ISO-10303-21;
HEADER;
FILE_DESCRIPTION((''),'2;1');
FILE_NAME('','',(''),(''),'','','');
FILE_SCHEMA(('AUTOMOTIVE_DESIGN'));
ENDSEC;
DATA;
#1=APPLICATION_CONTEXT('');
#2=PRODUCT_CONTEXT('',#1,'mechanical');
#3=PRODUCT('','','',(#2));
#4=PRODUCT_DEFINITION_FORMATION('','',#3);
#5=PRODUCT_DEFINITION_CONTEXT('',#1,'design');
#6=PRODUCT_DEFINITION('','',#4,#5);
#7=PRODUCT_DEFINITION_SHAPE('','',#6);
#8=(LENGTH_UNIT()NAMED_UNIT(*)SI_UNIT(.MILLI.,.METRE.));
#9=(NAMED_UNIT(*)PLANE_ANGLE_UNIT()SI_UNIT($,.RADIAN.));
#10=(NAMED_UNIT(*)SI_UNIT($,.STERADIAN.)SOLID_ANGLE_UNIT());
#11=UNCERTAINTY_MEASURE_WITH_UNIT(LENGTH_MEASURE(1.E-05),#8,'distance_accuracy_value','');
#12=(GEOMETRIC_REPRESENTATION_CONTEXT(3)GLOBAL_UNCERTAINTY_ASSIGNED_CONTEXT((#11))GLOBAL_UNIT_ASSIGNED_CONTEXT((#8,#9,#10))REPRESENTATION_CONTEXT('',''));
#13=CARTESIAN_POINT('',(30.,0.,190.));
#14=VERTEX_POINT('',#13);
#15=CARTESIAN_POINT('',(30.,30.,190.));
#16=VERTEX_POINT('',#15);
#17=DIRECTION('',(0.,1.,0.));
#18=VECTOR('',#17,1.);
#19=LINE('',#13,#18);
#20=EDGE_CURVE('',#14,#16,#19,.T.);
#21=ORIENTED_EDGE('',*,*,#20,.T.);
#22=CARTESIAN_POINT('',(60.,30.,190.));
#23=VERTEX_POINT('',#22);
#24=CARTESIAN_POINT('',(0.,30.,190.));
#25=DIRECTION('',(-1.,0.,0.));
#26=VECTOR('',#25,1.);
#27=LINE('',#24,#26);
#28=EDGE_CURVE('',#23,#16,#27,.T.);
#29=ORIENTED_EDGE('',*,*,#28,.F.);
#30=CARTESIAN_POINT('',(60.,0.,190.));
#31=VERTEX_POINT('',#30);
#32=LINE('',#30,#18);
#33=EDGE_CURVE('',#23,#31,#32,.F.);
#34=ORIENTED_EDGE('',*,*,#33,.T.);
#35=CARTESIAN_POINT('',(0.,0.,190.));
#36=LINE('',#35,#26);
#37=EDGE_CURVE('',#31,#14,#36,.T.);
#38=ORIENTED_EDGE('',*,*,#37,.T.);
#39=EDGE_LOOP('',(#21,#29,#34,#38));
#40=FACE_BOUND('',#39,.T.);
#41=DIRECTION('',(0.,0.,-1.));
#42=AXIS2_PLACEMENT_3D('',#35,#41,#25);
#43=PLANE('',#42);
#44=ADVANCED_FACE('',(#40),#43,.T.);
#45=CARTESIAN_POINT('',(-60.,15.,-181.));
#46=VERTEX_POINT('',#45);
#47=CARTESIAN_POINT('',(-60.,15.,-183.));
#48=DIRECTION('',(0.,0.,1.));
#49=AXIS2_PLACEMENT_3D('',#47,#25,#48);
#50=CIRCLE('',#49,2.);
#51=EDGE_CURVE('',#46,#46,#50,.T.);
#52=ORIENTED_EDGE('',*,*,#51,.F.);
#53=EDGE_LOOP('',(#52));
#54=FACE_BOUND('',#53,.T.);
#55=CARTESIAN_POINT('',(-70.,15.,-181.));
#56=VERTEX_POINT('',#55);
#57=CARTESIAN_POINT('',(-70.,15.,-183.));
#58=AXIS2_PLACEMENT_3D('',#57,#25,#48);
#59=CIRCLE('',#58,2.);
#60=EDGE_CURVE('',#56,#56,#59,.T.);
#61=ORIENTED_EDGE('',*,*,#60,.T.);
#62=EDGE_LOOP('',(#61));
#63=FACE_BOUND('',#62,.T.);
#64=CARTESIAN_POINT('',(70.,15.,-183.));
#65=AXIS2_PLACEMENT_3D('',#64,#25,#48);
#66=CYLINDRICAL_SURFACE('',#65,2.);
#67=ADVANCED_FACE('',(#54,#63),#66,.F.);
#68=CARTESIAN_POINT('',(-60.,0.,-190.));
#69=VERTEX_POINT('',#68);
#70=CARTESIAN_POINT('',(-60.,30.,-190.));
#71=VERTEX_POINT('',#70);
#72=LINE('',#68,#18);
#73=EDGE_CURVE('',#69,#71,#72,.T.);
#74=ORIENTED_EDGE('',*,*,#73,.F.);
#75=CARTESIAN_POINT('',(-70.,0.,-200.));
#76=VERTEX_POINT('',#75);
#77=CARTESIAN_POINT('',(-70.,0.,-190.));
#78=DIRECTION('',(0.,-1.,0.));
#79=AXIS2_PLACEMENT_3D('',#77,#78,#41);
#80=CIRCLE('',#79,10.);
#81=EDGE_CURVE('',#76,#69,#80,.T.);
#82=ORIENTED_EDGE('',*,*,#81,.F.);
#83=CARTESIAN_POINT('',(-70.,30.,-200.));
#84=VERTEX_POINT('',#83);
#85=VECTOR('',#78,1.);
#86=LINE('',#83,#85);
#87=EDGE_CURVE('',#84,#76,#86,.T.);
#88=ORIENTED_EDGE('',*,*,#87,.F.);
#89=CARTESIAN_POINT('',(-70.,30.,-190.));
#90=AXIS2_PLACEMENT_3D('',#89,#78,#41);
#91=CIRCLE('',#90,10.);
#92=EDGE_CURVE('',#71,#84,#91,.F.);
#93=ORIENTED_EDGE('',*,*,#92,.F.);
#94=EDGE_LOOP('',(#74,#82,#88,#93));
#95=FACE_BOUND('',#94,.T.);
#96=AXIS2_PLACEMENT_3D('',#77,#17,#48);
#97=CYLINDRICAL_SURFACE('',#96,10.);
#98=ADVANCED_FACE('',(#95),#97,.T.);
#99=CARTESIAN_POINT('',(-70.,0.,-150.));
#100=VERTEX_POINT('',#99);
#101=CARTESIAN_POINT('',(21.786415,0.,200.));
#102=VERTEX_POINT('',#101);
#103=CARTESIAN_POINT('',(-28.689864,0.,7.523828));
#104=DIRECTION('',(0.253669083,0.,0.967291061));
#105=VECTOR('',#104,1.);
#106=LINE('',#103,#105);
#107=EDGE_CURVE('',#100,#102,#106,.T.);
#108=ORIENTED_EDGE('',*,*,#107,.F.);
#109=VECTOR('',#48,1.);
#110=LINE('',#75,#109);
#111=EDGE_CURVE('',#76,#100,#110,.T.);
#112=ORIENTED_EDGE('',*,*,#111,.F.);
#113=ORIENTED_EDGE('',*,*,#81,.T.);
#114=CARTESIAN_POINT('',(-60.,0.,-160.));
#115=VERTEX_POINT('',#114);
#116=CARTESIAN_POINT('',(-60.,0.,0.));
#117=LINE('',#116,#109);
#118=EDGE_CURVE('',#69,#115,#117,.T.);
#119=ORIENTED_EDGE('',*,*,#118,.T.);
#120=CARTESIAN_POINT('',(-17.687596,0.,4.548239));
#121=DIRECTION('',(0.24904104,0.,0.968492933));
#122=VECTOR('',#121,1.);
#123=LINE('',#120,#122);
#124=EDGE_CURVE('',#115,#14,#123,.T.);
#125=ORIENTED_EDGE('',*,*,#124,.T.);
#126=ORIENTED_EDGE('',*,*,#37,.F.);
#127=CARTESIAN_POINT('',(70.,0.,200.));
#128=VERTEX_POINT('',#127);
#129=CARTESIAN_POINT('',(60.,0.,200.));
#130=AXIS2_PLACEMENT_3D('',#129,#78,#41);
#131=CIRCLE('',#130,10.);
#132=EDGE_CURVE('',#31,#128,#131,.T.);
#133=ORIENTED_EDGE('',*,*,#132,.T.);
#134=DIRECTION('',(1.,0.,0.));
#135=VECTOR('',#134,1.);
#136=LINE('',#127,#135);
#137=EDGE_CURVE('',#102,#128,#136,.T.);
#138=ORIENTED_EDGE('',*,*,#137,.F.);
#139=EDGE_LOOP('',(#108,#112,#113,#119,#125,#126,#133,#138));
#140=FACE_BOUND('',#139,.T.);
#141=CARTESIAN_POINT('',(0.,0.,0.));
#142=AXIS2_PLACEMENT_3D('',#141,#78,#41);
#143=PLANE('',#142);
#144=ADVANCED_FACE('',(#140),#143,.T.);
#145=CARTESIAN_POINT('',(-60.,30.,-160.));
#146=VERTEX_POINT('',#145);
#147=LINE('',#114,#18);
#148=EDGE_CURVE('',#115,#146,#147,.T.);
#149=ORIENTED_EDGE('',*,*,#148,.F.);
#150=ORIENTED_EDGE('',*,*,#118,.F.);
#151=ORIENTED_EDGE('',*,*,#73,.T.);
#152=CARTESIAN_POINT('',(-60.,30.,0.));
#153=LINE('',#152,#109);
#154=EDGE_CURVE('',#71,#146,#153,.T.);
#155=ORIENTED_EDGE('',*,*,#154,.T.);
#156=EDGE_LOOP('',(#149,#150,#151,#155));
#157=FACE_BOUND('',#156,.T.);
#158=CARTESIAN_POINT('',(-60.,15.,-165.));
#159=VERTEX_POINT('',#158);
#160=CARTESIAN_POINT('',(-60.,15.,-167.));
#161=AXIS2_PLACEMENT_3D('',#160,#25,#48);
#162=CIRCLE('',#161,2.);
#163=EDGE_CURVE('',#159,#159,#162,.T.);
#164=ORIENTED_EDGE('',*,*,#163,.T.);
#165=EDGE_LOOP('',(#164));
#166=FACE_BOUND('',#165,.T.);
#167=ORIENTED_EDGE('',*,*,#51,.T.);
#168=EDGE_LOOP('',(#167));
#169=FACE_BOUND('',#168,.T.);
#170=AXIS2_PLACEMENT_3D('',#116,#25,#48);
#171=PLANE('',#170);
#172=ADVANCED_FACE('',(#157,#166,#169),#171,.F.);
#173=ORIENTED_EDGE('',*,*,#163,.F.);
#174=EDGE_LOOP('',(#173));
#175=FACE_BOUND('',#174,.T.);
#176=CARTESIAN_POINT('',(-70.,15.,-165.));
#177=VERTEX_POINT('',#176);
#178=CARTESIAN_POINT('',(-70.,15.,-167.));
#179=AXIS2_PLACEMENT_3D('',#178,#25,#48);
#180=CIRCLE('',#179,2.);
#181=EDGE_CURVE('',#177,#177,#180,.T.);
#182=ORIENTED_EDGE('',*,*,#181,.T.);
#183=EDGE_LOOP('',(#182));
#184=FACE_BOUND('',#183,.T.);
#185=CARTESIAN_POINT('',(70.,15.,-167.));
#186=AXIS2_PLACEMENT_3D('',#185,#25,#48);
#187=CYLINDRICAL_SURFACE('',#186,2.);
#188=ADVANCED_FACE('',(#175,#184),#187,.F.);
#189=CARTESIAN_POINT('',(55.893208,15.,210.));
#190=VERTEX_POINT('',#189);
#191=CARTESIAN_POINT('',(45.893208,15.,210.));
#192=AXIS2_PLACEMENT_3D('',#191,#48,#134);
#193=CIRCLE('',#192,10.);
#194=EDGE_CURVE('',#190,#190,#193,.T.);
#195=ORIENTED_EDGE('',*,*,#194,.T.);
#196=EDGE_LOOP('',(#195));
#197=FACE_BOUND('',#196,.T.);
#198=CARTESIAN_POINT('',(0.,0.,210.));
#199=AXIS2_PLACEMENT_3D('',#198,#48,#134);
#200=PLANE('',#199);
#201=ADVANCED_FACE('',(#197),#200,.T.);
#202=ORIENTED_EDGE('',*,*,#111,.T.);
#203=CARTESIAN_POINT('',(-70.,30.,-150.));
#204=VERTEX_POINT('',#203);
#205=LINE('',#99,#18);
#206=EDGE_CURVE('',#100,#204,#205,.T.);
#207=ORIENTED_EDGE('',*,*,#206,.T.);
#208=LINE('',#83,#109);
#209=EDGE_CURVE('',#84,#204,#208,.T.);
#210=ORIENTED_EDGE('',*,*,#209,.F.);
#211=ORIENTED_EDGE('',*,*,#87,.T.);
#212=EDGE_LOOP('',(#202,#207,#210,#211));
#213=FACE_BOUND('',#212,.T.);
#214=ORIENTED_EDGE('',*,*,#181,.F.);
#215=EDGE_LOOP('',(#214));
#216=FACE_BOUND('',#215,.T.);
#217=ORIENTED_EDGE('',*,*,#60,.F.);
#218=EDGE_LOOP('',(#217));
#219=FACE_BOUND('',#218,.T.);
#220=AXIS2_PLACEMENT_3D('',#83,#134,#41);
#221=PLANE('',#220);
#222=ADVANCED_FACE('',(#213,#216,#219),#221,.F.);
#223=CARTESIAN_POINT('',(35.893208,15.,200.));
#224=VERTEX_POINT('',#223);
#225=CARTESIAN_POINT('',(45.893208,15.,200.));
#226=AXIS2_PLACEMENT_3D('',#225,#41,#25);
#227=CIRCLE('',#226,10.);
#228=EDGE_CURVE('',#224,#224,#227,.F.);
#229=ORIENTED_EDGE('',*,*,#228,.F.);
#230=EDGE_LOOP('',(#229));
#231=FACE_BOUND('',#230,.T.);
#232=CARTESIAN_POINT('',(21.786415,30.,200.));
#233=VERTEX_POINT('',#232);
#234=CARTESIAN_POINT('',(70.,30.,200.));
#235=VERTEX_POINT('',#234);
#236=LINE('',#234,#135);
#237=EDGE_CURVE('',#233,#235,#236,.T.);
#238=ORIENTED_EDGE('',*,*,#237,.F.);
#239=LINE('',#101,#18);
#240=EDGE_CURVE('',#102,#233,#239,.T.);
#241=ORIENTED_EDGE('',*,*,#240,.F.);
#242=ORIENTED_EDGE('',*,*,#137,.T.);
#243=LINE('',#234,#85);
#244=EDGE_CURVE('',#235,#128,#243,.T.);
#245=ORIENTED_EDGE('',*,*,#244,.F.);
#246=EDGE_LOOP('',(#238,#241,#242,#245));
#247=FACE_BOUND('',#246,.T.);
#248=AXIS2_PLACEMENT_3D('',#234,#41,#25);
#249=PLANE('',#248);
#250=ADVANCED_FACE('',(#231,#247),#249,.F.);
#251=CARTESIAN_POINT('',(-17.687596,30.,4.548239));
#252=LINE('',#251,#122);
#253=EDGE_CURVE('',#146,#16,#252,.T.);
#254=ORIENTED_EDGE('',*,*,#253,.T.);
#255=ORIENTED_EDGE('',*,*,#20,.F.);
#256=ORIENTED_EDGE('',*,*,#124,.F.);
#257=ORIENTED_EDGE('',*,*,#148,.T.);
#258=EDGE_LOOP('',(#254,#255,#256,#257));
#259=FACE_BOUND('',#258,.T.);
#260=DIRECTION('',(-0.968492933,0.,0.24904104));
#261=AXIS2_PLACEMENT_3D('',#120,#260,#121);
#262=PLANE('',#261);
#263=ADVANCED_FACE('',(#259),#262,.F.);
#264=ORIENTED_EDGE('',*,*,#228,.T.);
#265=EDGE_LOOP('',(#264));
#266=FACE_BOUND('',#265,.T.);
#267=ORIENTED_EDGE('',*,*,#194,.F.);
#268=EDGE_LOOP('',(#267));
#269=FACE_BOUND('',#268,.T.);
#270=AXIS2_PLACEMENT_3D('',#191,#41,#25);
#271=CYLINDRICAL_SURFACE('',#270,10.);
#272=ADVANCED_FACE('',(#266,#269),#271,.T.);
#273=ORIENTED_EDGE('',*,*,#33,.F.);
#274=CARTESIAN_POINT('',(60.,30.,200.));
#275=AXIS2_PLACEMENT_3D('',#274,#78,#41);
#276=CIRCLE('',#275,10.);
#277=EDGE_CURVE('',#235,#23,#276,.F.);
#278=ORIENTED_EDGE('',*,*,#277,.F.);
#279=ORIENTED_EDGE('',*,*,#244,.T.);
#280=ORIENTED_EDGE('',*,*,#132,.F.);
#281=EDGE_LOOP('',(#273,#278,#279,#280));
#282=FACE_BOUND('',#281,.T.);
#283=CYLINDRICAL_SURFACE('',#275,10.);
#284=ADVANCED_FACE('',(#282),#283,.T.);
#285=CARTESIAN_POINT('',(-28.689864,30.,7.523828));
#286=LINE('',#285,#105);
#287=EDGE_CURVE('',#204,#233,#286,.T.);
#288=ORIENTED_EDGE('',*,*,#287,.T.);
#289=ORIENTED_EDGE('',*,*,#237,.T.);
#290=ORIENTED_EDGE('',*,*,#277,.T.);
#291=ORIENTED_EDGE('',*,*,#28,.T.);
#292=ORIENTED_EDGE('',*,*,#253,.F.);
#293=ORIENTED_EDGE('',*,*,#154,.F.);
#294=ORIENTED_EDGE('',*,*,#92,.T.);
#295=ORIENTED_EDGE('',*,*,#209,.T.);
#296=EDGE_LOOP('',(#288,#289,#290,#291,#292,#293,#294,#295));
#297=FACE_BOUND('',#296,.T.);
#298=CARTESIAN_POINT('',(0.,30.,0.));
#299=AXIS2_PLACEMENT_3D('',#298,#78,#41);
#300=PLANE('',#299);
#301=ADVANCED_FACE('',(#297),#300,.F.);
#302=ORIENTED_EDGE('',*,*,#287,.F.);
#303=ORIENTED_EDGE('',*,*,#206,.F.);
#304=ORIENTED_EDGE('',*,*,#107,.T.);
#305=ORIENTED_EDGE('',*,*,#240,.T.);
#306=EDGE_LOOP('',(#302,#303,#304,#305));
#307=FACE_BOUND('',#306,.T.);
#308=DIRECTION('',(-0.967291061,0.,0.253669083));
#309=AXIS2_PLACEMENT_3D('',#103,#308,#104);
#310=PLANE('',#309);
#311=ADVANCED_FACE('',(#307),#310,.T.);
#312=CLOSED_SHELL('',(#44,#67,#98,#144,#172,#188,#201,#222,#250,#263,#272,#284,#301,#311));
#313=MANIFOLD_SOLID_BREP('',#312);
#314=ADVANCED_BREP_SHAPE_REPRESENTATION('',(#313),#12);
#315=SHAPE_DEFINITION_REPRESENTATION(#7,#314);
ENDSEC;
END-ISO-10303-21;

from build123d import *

# Parameters (mm, degrees)
ESQUISSE1_W             = 140
ESQUISSE1_H             = 400
BOSS_EXTRU_1_DEPTH      = 30
ENL_V_MAT_EXTRU_2_DEPTH = 30
ESQUISSE3_R             = 2
ENL_V_MAT_EXTRU_3_DEPTH = 246.967477525
BOSS_EXTRU_3_DEPTH      = 10
CONG_1_R                = 10
CONG_2_R                = 10


with BuildPart() as part:
    # Esquisse1 → Boss.-Extru.1 (new body)
    with BuildSketch(Plane(origin=(0, 0, 0), x_dir=(1, 0, 0), z_dir=(0, 1, 0))):
        Rectangle(ESQUISSE1_W, ESQUISSE1_H)
    extrude(amount=BOSS_EXTRU_1_DEPTH)

    # Esquisse2 → Enlèv. mat.-Extru.2 (cut)
    with BuildSketch(Plane(origin=(0, 30, 0), x_dir=(1, 0, 0), z_dir=(0, 1, 0))):
        Polygon((21.786415215, -200), (-70, 150), (-70, -200), align=None)
        Polygon((70, 200), (-60, 200), (-60, 160), (30, -190), (70, -190), align=None)
    extrude(amount=-ENL_V_MAT_EXTRU_2_DEPTH, mode=Mode.SUBTRACT)

    # Esquisse3 → Enlèv. mat.-Extru.3 (cut, through all)
    with BuildSketch(Plane.ZY.offset(70)):
        with Locations((-183, 15)):
            Circle(ESQUISSE3_R)
        with Locations((-167, 15)):
            Circle(ESQUISSE3_R)
    extrude(amount=-ENL_V_MAT_EXTRU_3_DEPTH, mode=Mode.SUBTRACT)

    # Esquisse4 → Boss.-Extru.3 (add)
    with BuildSketch(Plane.XY.offset(200)):
        with BuildLine():
            ThreePointArc((55.893207608, 15), (48.640450238, 24.615230519), (37.402676021, 20.283074236))
            Line((37.402676021, 20.283074236), (54.383739194, 9.716925764))
            ThreePointArc((54.383739194, 9.716925764), (55.508438127, 12.25275737), (55.893207608, 15))
        make_face()
        with BuildLine():
            Line((54.383739194, 9.716925764), (37.402676021, 20.283074236))
            ThreePointArc((37.402676021, 20.283074236), (40.610133372, 6.509468414), (54.383739194, 9.716925764))
        make_face()
    extrude(amount=BOSS_EXTRU_3_DEPTH)

    # Congé1
    cong_1_edges = [part.edges().sort_by_distance(p)[0] for p in [
        (-60, 15, -200),
    ]]
    fillet(cong_1_edges, radius=CONG_1_R - 0.0001)  # a hair under: the kernel refuses the full size

    # Congé2
    cong_2_edges = [part.edges().sort_by_distance(p)[0] for p in [
        (70, 15, 190),
    ]]
    fillet(cong_2_edges, radius=CONG_2_R - 0.0001)  # a hair under: the kernel refuses the full size


solid = part.part
